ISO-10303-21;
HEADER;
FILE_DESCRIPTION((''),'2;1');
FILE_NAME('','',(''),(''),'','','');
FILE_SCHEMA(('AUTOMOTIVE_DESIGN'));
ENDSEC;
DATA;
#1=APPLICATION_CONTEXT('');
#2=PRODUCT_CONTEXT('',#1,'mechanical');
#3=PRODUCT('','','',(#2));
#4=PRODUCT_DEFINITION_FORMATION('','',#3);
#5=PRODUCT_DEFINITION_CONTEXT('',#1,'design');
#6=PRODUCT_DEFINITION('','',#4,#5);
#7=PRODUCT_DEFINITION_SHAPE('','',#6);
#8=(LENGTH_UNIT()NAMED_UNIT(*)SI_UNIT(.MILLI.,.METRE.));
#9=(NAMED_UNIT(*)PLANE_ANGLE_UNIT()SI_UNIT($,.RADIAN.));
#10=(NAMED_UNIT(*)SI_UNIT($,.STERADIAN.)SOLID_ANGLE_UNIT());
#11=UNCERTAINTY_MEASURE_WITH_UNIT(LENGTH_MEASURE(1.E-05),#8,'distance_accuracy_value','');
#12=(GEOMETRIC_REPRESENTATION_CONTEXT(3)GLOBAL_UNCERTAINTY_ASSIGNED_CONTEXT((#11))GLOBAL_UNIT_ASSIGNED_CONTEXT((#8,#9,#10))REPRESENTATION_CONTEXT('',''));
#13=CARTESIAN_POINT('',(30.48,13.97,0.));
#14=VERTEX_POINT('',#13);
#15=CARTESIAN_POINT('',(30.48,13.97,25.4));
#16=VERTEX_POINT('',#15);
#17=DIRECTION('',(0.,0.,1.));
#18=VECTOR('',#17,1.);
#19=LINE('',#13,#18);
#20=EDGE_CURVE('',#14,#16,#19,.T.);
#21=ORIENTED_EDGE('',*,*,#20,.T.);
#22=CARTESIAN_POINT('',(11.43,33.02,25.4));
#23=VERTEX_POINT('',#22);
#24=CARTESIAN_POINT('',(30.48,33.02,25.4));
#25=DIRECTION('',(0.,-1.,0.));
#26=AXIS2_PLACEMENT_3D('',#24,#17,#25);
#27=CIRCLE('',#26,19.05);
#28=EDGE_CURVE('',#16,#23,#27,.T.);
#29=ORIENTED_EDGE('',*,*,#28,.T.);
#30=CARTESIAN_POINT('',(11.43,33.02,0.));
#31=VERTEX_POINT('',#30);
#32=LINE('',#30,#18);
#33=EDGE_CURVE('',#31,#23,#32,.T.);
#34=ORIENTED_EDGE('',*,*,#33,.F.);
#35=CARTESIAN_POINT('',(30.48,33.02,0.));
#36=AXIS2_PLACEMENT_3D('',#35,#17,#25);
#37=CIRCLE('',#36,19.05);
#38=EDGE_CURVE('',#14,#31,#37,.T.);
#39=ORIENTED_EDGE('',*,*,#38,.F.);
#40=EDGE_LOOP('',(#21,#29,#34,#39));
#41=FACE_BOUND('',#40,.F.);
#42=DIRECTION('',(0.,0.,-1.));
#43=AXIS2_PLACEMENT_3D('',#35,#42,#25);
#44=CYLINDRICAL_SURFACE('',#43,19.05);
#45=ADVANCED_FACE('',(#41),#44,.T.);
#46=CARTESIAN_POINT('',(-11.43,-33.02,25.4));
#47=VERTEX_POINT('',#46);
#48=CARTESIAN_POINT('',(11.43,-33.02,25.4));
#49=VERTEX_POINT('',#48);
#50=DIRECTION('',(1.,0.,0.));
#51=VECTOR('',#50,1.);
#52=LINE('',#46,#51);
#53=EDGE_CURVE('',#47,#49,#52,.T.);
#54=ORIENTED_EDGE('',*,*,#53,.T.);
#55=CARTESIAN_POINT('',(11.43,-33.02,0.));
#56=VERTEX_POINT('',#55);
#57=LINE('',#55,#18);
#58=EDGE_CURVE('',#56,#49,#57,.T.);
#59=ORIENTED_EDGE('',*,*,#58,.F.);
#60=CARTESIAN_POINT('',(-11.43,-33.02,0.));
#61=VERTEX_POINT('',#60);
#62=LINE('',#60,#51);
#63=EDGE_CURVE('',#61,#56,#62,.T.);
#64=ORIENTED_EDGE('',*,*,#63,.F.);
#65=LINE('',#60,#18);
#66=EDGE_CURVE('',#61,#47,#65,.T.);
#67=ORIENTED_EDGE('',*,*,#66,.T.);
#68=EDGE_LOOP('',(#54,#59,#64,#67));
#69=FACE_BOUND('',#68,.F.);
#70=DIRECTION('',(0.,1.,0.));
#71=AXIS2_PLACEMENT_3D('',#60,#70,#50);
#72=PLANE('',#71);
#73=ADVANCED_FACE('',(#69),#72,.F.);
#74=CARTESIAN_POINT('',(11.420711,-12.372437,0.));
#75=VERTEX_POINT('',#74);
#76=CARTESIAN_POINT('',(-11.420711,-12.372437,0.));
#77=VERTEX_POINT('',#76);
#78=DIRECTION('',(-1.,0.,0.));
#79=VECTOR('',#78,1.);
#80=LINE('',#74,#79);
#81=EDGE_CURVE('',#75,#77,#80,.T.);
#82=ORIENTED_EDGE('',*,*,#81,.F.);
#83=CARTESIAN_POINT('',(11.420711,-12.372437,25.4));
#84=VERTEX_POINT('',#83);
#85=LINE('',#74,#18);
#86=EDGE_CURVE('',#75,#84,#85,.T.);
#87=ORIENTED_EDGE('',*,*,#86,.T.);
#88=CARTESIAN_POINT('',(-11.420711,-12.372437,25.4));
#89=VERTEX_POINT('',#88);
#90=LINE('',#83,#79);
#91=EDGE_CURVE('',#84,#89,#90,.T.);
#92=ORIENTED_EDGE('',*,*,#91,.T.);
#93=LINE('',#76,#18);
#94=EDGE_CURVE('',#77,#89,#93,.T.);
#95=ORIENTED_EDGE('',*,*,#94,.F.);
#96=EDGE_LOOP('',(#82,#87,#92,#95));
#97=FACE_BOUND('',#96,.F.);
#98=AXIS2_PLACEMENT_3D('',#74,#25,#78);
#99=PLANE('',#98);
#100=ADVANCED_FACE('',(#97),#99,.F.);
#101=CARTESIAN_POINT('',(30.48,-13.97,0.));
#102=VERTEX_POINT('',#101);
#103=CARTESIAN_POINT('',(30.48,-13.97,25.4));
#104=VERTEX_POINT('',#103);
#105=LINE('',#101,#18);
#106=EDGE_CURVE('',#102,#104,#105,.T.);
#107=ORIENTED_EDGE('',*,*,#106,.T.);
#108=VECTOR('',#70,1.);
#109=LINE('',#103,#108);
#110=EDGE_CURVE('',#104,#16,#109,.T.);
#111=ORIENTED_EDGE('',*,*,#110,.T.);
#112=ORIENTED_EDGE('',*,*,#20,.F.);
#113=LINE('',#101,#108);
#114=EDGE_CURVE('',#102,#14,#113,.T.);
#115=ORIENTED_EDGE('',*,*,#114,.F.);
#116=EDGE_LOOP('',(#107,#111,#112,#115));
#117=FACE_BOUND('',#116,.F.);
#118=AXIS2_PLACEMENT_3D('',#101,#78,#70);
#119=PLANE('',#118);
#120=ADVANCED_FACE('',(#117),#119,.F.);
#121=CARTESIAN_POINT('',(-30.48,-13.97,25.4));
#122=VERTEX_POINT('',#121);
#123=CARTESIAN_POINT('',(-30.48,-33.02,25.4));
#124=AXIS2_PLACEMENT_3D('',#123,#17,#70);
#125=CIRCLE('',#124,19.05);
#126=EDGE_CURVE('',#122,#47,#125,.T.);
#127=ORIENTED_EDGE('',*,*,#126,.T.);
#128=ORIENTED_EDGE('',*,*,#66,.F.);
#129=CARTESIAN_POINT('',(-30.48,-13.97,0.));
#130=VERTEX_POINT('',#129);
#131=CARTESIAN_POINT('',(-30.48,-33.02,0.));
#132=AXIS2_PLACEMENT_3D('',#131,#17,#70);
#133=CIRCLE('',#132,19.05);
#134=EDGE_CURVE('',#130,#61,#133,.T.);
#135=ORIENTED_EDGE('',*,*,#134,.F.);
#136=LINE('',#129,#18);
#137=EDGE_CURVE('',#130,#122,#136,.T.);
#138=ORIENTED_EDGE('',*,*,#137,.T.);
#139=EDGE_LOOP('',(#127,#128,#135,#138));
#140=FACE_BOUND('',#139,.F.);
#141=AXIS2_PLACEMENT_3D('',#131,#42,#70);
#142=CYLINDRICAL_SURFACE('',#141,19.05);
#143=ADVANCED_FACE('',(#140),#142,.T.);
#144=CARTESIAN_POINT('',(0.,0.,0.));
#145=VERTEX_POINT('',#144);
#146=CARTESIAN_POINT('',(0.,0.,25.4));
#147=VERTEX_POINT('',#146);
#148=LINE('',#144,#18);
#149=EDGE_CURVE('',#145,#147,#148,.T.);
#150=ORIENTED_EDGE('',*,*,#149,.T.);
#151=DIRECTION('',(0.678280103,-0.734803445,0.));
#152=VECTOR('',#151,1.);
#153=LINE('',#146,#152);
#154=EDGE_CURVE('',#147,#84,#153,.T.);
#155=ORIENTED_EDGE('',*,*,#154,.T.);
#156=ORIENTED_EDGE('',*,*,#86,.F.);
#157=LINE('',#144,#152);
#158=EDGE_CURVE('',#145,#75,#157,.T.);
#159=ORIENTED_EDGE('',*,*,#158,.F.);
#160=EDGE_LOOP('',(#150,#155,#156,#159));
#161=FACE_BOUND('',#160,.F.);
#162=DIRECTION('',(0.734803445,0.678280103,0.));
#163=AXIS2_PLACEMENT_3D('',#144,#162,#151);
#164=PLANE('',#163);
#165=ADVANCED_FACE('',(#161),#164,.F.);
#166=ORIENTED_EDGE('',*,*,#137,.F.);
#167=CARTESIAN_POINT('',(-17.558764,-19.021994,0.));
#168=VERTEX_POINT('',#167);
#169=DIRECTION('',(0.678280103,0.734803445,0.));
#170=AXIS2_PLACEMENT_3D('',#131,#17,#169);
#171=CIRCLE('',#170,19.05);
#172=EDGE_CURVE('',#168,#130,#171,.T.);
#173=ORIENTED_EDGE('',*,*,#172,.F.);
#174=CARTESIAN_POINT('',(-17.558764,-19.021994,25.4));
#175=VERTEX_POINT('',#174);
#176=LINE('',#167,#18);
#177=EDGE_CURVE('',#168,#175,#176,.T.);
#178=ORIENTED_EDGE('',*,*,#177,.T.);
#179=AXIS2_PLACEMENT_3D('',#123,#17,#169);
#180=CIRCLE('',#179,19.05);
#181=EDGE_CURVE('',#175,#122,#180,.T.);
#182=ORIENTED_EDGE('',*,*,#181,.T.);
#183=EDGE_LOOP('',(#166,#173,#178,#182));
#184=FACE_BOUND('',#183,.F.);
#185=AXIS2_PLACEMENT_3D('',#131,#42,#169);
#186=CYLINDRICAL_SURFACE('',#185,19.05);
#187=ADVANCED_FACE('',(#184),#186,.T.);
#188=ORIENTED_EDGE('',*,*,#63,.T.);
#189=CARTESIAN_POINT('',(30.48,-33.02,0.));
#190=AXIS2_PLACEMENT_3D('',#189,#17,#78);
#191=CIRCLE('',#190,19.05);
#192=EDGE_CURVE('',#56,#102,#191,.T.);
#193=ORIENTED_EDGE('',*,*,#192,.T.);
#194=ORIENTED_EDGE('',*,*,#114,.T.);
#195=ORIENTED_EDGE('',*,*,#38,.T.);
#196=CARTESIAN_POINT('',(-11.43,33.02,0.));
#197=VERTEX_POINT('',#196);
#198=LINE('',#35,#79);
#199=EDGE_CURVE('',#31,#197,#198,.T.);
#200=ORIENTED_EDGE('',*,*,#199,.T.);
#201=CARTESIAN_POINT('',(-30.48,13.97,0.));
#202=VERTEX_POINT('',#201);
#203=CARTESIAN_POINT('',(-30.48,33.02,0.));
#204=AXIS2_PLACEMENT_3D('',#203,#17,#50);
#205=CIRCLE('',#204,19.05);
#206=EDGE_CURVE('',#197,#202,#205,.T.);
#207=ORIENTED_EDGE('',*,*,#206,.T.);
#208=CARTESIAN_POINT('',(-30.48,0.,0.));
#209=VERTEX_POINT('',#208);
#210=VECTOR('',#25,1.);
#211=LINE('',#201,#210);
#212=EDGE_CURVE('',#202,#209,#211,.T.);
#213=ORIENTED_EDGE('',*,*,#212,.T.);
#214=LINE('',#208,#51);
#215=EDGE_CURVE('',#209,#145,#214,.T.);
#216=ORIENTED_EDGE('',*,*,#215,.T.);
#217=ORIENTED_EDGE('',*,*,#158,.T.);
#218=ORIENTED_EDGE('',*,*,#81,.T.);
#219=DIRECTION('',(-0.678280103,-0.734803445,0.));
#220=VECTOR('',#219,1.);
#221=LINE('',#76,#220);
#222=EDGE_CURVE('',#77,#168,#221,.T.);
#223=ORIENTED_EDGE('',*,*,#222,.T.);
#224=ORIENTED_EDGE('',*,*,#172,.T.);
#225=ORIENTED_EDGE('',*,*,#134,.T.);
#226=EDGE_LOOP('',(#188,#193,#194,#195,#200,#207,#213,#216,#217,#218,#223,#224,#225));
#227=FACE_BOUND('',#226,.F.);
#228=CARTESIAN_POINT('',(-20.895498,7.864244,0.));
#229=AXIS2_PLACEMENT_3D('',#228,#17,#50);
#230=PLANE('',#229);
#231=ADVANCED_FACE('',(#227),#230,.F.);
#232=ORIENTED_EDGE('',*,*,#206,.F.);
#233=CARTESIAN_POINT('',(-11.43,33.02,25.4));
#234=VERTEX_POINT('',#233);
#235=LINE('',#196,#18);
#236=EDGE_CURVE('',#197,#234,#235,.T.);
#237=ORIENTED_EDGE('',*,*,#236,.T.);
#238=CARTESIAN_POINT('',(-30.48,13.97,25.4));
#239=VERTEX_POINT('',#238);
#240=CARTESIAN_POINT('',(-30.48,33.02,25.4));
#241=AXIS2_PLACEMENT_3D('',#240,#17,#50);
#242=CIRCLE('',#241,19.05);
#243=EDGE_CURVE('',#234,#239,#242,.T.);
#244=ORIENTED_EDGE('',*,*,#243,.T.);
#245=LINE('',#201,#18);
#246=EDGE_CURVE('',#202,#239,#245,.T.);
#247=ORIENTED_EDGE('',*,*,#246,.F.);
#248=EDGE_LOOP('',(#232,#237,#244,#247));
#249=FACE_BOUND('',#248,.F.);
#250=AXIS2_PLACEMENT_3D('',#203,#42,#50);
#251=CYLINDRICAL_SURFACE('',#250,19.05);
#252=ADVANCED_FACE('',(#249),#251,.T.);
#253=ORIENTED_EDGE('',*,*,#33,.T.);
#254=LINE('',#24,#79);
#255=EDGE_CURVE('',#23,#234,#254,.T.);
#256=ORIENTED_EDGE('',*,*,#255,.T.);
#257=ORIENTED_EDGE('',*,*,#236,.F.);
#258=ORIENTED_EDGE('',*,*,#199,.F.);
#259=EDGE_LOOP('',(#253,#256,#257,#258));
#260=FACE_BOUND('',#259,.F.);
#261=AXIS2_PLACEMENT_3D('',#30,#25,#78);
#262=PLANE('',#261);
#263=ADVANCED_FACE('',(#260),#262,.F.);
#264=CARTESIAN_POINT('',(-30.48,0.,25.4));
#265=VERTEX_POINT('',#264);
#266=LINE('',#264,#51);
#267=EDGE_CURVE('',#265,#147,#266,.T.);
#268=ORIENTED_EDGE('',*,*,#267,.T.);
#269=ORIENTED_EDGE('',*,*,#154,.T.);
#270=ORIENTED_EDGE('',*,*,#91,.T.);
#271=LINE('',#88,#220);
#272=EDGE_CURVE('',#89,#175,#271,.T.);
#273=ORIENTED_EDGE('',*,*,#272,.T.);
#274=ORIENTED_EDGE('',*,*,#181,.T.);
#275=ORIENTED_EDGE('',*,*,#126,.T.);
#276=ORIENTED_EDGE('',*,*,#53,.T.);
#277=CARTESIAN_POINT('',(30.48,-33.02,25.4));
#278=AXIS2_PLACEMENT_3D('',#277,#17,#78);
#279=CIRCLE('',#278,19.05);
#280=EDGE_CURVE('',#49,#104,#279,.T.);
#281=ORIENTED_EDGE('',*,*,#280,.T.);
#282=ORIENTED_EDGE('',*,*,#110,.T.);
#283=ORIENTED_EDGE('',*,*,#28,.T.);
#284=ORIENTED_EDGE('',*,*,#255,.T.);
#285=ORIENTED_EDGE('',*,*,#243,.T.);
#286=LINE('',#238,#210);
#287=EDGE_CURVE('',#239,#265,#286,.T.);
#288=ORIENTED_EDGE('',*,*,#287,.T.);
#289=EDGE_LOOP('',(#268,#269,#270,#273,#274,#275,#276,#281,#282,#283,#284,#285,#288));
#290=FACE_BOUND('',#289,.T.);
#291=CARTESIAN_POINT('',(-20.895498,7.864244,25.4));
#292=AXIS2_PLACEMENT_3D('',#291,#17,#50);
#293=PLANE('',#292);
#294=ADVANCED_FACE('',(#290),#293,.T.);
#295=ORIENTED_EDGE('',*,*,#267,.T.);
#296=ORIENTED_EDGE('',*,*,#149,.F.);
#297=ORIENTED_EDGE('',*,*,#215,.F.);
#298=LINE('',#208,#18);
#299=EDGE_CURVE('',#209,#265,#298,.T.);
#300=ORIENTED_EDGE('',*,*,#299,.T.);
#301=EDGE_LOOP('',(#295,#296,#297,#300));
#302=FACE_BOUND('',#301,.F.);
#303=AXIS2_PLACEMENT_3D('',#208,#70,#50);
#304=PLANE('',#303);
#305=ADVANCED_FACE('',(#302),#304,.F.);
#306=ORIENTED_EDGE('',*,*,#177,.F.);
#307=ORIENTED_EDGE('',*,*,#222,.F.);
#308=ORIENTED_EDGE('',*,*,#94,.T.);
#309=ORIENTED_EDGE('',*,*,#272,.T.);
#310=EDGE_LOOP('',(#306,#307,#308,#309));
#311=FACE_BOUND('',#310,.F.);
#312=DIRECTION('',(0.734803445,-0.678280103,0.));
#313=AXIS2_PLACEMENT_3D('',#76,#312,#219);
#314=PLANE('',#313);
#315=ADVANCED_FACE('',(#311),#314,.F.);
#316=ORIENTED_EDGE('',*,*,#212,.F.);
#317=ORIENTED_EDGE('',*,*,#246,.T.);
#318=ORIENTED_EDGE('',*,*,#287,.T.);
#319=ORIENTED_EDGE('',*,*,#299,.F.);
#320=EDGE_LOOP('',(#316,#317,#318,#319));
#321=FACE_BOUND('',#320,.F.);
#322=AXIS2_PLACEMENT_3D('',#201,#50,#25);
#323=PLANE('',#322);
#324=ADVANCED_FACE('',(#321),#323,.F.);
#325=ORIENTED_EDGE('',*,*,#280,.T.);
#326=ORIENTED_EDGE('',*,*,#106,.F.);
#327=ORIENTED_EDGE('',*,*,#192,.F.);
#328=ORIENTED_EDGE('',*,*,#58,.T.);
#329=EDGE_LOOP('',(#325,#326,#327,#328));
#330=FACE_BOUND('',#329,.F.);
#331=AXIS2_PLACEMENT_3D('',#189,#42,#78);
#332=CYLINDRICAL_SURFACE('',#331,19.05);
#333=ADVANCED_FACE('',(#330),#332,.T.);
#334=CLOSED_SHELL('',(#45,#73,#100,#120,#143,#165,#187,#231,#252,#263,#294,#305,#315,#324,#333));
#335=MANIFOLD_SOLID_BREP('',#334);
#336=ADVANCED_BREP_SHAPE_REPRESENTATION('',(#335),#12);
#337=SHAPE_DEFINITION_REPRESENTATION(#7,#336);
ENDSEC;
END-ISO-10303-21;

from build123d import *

# Parameters (mm, degrees)
F1_DEPTH = 25.4


with BuildPart() as f1:
    # F0 (on Top) → F1 (new body)
    with BuildSketch(Plane.XY):
        with BuildLine():
            Line((-30.48, 13.97), (-30.48, 0))
            Line((-30.48, 0), (-11.4207109466, 0))
            Line((-11.4207109466, 0), (-11.4207109466, 12.3724368588))
            Line((-11.4207109466, 12.3724368588), (-17.5587640429, 19.0219943798))
            ThreePointArc((-17.5587640429, 19.0219943798), (-23.5431241565, 15.277896023), (-30.48, 13.97))
        make_face()
        Polygon((-11.4207109466, 12.3724368588), (-11.4207109466, 0), (0, 0), align=None)
        with BuildLine():
            ThreePointArc((-17.5587640429, -19.0219943798), (-23.5431241565, -15.277896023), (-30.48, -13.97))
            Line((-30.48, -13.97), (-30.48, -33.02))
            Line((-30.48, -33.02), (-17.5587640429, -19.0219943798))
        make_face()
        with BuildLine():
            Line((-30.48, -33.02), (-30.48, -13.97))
            ThreePointArc((-30.48, -13.97), (-43.9503841816, -46.4903841816), (-11.43, -33.02))
            Line((-11.43, -33.02), (-30.48, -33.02))
        make_face()
        with BuildLine():
            ThreePointArc((-49.53, 33.02), (-43.9503841816, 19.5496158184), (-30.48, 13.97))
            Line((-30.48, 13.97), (-30.48, 33.02))
            Line((-30.48, 33.02), (-49.53, 33.02))
        make_face()
        with BuildLine():
            Line((-30.48, 33.02), (-30.48, 13.97))
            ThreePointArc((-30.48, 13.97), (-23.5431241565, 15.277896023), (-17.5587640429, 19.0219943798))
            Line((-17.5587640429, 19.0219943798), (-30.48, 33.02))
        make_face()
        Polygon((11.4207109466, 12.3724368588), (0, 0), (11.4207109466, 0), align=None)
        Polygon((-11.4207109466, 12.3724368588), (0, 0), (11.4207109466, 12.3724368588), align=None)
        Polygon((11.4207109466, 0), (0, 0), (11.4207109466, -12.3724368588), align=None)
        with BuildLine():
            Line((-17.5587640429, 19.0219943798), (-11.4207109466, 12.3724368588))
            Line((-11.4207109466, 12.3724368588), (11.4207109466, 12.3724368588))
            Line((11.4207109466, 12.3724368588), (17.5587640429, 19.0219943798))
            ThreePointArc((17.5587640429, 19.0219943798), (13.0293260161, 25.3795499145), (11.43, 33.02))
            Line((11.43, 33.02), (-11.43, 33.02))
            ThreePointArc((-11.43, 33.02), (-13.0293260161, 25.3795499145), (-17.5587640429, 19.0219943798))
        make_face()
        with BuildLine():
            Line((11.4207109466, -12.3724368588), (-11.4207109466, -12.3724368588))
            Line((-11.4207109466, -12.3724368588), (-17.5587640429, -19.0219943798))
            ThreePointArc((-17.5587640429, -19.0219943798), (-13.0293260161, -25.3795499145), (-11.43, -33.02))
            Line((-11.43, -33.02), (11.43, -33.02))
            ThreePointArc((11.43, -33.02), (13.0293260161, -25.3795499145), (17.5587640429, -19.0219943798))
            Line((17.5587640429, -19.0219943798), (11.4207109466, -12.3724368588))
        make_face()
        with BuildLine():
            Line((-17.5587640429, -19.0219943798), (-30.48, -33.02))
            Line((-30.48, -33.02), (-11.43, -33.02))
            ThreePointArc((-11.43, -33.02), (-13.0293260161, -25.3795499145), (-17.5587640429, -19.0219943798))
        make_face()
        with BuildLine():
            Line((-49.53, 33.02), (-30.48, 33.02))
            Line((-30.48, 33.02), (-11.43, 33.02))
            ThreePointArc((-11.43, 33.02), (-30.48, 52.07), (-49.53, 33.02))
        make_face()
        with BuildLine():
            Line((-11.43, 33.02), (-30.48, 33.02))
            Line((-30.48, 33.02), (-17.5587640429, 19.0219943798))
            ThreePointArc((-17.5587640429, 19.0219943798), (-13.0293260161, 25.3795499145), (-11.43, 33.02))
        make_face()
        with BuildLine():
            Line((11.4207109466, 12.3724368588), (11.4207109466, 0))
            Line((11.4207109466, 0), (30.48, 0))
            Line((30.48, 0), (30.48, 13.97))
            ThreePointArc((30.48, 13.97), (23.5431241565, 15.277896023), (17.5587640429, 19.0219943798))
            Line((17.5587640429, 19.0219943798), (11.4207109466, 12.3724368588))
        make_face()
        with BuildLine():
            Line((30.48, 0), (11.4207109466, 0))
            Line((11.4207109466, 0), (11.4207109466, -12.3724368588))
            Line((11.4207109466, -12.3724368588), (17.5587640429, -19.0219943798))
            ThreePointArc((17.5587640429, -19.0219943798), (23.5431241565, -15.277896023), (30.48, -13.97))
            Line((30.48, -13.97), (30.48, 0))
        make_face()
        with BuildLine():
            ThreePointArc((17.5587640429, -19.0219943798), (13.0293260161, -25.3795499145), (11.43, -33.02))
            Line((11.43, -33.02), (30.48, -33.02))
            Line((30.48, -33.02), (17.5587640429, -19.0219943798))
        make_face()
        with BuildLine():
            Line((30.48, -33.02), (11.43, -33.02))
            ThreePointArc((11.43, -33.02), (30.48, -52.07), (49.53, -33.02))
            ThreePointArc((49.53, -33.02), (43.9503841816, -19.5496158184), (30.48, -13.97))
            Line((30.48, -13.97), (30.48, -33.02))
        make_face()
        with BuildLine():
            ThreePointArc((11.43, 33.02), (13.0293260161, 25.3795499145), (17.5587640429, 19.0219943798))
            Line((17.5587640429, 19.0219943798), (30.48, 33.02))
            Line((30.48, 33.02), (11.43, 33.02))
        make_face()
        with BuildLine():
            Line((30.48, 33.02), (17.5587640429, 19.0219943798))
            ThreePointArc((17.5587640429, 19.0219943798), (23.5431241565, 15.277896023), (30.48, 13.97))
            Line((30.48, 13.97), (30.48, 33.02))
        make_face()
        with BuildLine():
            ThreePointArc((30.48, -13.97), (23.5431241565, -15.277896023), (17.5587640429, -19.0219943798))
            Line((17.5587640429, -19.0219943798), (30.48, -33.02))
            Line((30.48, -33.02), (30.48, -13.97))
        make_face()
        with BuildLine():
            ThreePointArc((49.53, 33.02), (30.48, 52.07), (11.43, 33.02))
            Line((11.43, 33.02), (30.48, 33.02))
            Line((30.48, 33.02), (49.53, 33.02))
        make_face()
        with BuildLine():
            Line((30.48, 33.02), (30.48, 13.97))
            ThreePointArc((30.48, 13.97), (43.9503841816, 19.5496158184), (49.53, 33.02))
            Line((49.53, 33.02), (30.48, 33.02))
        make_face()
    extrude(amount=F1_DEPTH)


solid = f1.part
